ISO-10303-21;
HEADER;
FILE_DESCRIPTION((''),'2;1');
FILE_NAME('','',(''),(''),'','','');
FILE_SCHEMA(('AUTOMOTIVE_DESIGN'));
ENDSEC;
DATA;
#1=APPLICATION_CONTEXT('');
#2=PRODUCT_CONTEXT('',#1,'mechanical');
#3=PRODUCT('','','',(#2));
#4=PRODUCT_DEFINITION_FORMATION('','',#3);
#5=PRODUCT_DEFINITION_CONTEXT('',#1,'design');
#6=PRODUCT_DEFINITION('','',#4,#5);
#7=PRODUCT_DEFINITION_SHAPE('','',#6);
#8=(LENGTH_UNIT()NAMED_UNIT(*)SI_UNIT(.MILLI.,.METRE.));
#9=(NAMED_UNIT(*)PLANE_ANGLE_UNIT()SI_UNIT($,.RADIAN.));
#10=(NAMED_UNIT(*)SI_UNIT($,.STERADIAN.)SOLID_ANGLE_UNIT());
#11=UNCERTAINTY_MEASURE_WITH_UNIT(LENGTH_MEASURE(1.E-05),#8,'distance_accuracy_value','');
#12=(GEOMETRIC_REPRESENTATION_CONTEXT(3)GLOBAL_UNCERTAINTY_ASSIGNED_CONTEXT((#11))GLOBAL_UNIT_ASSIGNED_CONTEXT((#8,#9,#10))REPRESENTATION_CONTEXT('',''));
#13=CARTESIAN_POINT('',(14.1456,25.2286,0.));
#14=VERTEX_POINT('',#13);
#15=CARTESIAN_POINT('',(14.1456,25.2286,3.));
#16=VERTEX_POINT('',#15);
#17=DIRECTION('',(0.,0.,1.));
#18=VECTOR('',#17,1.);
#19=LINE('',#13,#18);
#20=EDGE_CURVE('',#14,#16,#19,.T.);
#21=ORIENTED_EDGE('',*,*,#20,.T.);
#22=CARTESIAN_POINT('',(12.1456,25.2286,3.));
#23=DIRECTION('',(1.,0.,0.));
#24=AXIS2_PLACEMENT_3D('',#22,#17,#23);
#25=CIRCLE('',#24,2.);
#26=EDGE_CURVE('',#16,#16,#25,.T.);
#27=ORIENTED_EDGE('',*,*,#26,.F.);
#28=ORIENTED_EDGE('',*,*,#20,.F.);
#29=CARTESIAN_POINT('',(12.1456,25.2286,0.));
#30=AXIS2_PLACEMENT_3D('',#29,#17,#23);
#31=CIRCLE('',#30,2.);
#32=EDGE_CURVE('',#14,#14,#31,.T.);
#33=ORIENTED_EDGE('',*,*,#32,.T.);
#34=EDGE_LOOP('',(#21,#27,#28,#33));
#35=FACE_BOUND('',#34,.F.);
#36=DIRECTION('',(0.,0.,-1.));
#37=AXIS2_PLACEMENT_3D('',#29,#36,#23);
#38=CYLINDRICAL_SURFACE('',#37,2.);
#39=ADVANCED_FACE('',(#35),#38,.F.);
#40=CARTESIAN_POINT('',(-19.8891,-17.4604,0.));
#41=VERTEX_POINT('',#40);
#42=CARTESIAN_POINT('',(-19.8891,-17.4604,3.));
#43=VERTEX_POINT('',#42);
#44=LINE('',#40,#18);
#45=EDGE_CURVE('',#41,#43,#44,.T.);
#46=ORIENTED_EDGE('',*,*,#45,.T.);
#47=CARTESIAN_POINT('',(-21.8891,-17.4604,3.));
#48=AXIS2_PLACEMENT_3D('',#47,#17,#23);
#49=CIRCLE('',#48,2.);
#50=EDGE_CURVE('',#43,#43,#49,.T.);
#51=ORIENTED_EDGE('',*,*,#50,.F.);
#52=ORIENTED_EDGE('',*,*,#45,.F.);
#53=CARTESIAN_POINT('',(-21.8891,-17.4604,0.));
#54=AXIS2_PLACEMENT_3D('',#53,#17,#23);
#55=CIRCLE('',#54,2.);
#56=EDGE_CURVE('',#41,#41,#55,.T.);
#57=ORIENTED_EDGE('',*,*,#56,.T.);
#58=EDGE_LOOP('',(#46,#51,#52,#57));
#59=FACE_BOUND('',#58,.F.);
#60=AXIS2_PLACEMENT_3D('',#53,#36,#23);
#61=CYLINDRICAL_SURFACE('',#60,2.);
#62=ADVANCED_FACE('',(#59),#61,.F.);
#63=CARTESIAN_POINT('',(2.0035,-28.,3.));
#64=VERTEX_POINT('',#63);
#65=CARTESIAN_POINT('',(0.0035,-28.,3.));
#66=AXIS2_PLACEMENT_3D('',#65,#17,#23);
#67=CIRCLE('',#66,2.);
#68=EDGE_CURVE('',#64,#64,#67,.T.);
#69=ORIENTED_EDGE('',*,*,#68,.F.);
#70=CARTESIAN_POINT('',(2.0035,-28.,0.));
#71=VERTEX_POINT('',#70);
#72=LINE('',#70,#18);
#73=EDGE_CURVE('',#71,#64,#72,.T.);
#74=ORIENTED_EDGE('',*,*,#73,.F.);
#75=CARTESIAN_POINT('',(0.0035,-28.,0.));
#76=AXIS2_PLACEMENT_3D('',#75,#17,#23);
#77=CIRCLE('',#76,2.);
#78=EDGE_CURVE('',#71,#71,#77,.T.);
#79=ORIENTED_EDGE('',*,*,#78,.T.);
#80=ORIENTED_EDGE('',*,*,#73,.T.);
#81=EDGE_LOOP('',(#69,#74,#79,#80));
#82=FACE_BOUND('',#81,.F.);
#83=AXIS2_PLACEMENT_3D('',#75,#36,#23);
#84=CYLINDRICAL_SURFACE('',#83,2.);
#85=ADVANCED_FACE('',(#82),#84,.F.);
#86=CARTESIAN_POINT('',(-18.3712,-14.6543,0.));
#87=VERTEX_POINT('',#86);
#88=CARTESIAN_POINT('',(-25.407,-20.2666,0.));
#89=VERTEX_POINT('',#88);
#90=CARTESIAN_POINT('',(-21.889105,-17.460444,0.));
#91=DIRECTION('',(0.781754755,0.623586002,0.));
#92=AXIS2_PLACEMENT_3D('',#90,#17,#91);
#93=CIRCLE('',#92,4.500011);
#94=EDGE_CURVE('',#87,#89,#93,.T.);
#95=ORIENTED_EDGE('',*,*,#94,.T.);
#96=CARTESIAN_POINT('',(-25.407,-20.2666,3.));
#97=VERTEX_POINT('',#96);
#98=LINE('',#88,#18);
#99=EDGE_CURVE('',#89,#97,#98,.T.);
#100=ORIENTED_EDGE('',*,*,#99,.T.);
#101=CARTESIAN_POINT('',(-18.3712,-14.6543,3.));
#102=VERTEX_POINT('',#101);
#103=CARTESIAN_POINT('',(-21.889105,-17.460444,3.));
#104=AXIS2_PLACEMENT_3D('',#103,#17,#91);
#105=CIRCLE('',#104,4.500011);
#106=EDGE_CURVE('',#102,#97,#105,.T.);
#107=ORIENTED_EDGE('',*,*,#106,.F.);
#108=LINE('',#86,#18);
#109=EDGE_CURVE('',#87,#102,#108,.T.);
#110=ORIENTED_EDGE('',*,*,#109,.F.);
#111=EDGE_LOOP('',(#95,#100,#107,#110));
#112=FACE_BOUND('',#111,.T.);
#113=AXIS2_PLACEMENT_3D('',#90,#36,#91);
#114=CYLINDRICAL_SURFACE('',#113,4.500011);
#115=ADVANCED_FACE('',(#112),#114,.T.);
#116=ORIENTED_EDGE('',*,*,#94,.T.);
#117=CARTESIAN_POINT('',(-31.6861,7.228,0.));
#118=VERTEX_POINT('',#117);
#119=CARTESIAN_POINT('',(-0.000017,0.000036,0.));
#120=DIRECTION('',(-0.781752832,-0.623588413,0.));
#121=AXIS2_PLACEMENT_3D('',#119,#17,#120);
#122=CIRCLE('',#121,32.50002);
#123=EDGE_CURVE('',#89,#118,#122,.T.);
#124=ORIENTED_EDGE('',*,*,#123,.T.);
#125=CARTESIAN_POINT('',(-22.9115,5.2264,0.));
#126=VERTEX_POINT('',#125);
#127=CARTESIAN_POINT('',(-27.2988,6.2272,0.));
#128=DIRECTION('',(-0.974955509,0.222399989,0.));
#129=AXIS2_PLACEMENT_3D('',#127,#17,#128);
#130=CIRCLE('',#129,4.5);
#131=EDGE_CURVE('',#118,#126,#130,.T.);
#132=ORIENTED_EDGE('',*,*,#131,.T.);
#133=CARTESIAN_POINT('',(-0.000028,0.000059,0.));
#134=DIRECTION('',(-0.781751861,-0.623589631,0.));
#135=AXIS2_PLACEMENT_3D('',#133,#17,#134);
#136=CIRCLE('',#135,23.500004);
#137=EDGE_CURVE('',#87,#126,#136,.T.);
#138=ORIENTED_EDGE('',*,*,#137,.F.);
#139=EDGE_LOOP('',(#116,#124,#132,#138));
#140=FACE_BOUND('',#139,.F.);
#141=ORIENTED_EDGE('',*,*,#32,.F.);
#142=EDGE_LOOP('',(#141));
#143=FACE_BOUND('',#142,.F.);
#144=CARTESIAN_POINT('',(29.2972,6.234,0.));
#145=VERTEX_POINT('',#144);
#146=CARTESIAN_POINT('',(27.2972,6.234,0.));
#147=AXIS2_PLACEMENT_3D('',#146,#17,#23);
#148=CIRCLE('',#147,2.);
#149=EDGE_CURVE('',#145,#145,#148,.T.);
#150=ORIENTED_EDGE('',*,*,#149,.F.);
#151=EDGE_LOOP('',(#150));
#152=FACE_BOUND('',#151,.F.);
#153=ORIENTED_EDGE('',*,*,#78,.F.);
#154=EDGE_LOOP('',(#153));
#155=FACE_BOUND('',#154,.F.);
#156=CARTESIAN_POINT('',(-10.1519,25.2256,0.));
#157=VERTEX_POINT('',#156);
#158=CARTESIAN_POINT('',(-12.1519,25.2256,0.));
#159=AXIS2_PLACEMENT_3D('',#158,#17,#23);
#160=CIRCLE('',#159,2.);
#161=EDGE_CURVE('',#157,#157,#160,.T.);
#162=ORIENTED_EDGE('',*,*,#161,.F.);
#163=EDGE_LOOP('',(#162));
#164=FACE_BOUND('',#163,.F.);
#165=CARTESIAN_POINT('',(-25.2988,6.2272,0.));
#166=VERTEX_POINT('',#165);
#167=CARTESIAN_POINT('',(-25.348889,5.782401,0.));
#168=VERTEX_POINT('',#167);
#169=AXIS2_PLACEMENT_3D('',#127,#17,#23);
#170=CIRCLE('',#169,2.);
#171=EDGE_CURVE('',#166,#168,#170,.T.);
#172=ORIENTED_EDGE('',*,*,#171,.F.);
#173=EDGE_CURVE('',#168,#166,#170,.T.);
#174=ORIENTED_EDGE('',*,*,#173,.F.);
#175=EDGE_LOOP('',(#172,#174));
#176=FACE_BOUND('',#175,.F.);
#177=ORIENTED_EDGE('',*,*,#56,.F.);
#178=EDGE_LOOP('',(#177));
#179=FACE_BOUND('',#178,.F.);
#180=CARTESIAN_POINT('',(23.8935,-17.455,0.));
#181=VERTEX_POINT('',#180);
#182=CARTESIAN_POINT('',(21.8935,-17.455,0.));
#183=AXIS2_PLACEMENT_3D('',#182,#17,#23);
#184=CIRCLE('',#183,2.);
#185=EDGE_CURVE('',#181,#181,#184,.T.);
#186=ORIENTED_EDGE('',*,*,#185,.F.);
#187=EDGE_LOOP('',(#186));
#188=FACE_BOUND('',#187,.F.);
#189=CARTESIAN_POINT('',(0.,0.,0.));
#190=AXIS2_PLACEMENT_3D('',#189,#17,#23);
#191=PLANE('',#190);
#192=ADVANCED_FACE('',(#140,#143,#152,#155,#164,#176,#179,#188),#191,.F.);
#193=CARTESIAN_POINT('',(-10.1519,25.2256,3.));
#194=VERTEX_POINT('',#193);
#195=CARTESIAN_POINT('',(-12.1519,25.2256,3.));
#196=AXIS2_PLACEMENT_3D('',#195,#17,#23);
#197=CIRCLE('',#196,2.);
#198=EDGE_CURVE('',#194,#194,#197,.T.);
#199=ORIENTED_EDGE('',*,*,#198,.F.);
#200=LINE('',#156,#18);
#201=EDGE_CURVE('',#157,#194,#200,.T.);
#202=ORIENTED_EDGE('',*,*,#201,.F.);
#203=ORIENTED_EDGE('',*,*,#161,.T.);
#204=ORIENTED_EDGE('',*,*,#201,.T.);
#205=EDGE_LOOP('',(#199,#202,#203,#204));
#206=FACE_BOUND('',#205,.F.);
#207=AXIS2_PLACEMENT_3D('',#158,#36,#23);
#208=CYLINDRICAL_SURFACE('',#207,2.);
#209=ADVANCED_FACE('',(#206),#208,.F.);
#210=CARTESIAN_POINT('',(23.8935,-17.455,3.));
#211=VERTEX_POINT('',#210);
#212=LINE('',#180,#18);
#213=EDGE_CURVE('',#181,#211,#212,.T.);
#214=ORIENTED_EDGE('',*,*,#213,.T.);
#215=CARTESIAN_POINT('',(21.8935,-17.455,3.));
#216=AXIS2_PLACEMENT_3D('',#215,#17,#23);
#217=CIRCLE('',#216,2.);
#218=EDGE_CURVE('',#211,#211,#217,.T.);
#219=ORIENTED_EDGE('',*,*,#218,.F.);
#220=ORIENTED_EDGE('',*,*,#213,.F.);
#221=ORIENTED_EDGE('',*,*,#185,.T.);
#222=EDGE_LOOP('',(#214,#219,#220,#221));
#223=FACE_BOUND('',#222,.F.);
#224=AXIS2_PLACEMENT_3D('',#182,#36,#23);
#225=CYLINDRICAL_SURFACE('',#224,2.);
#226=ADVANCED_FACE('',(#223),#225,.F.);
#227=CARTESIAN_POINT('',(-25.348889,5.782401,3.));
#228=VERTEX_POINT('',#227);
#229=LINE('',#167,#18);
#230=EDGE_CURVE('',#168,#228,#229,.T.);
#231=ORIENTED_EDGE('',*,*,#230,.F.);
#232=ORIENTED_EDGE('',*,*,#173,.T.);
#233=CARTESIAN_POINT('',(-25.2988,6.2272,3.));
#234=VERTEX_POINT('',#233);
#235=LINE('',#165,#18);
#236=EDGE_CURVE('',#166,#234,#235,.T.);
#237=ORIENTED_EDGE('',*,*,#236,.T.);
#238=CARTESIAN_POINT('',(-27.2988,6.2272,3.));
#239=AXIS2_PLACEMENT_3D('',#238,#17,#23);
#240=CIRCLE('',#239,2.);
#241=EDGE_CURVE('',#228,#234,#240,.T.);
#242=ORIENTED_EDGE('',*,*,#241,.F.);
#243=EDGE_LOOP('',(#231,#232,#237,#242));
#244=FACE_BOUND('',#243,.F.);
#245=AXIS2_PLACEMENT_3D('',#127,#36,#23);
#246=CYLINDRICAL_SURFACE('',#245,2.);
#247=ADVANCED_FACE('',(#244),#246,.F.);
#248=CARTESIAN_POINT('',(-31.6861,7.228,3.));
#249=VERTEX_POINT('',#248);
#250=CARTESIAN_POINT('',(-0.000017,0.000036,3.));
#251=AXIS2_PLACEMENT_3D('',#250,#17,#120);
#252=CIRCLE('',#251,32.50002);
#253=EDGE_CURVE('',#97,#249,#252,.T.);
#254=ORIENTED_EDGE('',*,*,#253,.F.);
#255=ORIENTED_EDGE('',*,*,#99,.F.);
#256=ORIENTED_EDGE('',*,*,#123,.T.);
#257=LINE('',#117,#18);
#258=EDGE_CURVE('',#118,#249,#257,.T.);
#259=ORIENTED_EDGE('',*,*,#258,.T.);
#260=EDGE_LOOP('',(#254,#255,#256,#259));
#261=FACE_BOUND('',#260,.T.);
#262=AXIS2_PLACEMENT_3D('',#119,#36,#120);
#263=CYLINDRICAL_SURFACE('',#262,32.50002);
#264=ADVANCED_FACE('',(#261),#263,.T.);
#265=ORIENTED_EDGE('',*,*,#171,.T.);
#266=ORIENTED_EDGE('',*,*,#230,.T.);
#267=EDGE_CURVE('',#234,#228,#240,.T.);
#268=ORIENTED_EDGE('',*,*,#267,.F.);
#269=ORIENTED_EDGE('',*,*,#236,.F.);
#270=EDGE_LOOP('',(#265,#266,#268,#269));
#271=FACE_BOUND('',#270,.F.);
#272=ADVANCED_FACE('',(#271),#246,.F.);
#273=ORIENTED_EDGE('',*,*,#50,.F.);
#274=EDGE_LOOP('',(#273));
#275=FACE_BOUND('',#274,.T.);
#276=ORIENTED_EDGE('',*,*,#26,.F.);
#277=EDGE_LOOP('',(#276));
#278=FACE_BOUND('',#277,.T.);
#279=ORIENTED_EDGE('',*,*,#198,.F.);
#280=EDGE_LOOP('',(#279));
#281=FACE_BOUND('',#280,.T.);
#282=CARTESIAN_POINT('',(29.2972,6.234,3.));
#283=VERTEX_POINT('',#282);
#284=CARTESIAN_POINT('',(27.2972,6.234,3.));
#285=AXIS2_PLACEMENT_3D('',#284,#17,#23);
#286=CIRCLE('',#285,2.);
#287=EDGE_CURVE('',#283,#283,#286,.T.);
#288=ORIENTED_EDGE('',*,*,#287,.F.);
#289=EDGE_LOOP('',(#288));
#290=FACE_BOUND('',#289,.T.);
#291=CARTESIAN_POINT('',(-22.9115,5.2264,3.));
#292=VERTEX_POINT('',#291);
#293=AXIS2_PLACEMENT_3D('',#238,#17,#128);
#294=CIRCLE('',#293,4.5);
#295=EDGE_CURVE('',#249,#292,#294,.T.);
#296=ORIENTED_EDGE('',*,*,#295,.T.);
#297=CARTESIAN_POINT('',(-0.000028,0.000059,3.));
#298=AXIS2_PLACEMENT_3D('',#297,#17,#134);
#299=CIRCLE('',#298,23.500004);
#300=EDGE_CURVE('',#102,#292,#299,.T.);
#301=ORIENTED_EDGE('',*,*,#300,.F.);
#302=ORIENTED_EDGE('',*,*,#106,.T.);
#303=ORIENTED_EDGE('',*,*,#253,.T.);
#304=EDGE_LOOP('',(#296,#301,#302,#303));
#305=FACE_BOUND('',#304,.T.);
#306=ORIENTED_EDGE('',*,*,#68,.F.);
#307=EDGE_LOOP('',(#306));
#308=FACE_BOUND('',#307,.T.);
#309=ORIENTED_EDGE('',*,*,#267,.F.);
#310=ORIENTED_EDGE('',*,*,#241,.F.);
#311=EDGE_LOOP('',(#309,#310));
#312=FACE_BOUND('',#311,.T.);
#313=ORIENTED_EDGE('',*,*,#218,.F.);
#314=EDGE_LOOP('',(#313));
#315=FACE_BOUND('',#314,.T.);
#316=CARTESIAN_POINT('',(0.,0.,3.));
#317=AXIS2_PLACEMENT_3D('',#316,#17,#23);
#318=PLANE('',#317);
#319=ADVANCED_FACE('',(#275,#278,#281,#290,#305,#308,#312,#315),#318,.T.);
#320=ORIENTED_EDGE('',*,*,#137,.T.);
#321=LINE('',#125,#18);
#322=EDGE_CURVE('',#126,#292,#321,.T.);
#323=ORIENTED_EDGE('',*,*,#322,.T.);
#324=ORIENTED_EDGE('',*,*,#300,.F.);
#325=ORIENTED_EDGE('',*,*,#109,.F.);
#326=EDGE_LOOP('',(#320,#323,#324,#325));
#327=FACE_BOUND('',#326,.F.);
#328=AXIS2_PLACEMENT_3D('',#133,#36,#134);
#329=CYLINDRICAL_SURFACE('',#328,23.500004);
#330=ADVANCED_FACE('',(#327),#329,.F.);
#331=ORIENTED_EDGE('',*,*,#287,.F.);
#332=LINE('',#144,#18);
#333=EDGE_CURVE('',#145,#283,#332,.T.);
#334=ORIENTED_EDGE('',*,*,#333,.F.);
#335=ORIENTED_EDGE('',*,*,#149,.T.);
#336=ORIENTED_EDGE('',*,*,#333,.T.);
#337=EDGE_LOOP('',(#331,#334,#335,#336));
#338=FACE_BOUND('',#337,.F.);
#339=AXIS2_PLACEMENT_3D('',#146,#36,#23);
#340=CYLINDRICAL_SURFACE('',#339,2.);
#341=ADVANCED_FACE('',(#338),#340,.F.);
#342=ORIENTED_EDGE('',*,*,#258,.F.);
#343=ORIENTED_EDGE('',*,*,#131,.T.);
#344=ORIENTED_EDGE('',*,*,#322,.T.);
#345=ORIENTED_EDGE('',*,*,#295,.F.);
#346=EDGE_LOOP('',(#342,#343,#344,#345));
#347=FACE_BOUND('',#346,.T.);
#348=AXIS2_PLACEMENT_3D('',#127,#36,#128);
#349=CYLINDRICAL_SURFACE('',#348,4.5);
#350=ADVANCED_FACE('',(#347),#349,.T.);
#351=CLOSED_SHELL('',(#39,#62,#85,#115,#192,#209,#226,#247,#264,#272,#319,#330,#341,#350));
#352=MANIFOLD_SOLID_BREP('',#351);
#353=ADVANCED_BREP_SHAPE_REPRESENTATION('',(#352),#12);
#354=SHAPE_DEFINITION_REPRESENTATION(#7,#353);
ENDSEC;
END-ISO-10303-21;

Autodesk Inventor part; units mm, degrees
ref_plane "YZ Plane" through (0, 0, 0) normal (1, 0, 0) x (0, 1, 0)
ref_plane "XZ Plane" through (0, 0, 0) normal (0, 1, 0) x (-1, 0, 0)
ref_plane "XY Plane" through (0, 0, 0) normal (0, 0, 1) x (1, 0, 0)
sketch "Sketch1" plane through (0, 0, 0) normal (0, 0, 1) x (1, 0, 0)
  arc A0 (-25.407, -20.2666) -> (-31.6861, 7.228) centre (0, 0) ccw
  arc A1 (-18.3712, -14.6543) -> (-22.9115, 5.2264) centre (0, 0) ccw
  circle A2 centre (27.2972, 6.234) radius 2
  circle A3 centre (12.1456, 25.2286) radius 2
  circle A4 centre (-12.1519, 25.2256) radius 2
  circle A5 centre (-27.2988, 6.2272) radius 2
  circle A6 centre (-21.8891, -17.4604) radius 2
  circle A7 centre (0.0035, -28) radius 2
  circle A8 centre (21.8935, -17.455) radius 2
  arc A9 (-18.3712, -14.6543) -> (-25.407, -20.2666) centre (-21.8891, -17.4604) ccw
  arc A10 (-31.6861, 7.228) -> (-22.9115, 5.2264) centre (-27.2988, 6.2272) ccw
  line L0 (0, 0) -> (-27.2988, 6.2272)
  line L1 (0, 0) -> (-28.0096, 0)
  dimension "d0" = 65
  dimension "d1" = 47
  dimension "d2" = 4
  dimension "d5" = 360
  dimension "d7" = 9
  dimension "d8" = 9
  dimension "d11" = 12.85
  dimension "d12" = 54.596
extrude "Extrusion1" add sketch "Sketch1" along normal blind 3
properties part number "fin entraineur"
